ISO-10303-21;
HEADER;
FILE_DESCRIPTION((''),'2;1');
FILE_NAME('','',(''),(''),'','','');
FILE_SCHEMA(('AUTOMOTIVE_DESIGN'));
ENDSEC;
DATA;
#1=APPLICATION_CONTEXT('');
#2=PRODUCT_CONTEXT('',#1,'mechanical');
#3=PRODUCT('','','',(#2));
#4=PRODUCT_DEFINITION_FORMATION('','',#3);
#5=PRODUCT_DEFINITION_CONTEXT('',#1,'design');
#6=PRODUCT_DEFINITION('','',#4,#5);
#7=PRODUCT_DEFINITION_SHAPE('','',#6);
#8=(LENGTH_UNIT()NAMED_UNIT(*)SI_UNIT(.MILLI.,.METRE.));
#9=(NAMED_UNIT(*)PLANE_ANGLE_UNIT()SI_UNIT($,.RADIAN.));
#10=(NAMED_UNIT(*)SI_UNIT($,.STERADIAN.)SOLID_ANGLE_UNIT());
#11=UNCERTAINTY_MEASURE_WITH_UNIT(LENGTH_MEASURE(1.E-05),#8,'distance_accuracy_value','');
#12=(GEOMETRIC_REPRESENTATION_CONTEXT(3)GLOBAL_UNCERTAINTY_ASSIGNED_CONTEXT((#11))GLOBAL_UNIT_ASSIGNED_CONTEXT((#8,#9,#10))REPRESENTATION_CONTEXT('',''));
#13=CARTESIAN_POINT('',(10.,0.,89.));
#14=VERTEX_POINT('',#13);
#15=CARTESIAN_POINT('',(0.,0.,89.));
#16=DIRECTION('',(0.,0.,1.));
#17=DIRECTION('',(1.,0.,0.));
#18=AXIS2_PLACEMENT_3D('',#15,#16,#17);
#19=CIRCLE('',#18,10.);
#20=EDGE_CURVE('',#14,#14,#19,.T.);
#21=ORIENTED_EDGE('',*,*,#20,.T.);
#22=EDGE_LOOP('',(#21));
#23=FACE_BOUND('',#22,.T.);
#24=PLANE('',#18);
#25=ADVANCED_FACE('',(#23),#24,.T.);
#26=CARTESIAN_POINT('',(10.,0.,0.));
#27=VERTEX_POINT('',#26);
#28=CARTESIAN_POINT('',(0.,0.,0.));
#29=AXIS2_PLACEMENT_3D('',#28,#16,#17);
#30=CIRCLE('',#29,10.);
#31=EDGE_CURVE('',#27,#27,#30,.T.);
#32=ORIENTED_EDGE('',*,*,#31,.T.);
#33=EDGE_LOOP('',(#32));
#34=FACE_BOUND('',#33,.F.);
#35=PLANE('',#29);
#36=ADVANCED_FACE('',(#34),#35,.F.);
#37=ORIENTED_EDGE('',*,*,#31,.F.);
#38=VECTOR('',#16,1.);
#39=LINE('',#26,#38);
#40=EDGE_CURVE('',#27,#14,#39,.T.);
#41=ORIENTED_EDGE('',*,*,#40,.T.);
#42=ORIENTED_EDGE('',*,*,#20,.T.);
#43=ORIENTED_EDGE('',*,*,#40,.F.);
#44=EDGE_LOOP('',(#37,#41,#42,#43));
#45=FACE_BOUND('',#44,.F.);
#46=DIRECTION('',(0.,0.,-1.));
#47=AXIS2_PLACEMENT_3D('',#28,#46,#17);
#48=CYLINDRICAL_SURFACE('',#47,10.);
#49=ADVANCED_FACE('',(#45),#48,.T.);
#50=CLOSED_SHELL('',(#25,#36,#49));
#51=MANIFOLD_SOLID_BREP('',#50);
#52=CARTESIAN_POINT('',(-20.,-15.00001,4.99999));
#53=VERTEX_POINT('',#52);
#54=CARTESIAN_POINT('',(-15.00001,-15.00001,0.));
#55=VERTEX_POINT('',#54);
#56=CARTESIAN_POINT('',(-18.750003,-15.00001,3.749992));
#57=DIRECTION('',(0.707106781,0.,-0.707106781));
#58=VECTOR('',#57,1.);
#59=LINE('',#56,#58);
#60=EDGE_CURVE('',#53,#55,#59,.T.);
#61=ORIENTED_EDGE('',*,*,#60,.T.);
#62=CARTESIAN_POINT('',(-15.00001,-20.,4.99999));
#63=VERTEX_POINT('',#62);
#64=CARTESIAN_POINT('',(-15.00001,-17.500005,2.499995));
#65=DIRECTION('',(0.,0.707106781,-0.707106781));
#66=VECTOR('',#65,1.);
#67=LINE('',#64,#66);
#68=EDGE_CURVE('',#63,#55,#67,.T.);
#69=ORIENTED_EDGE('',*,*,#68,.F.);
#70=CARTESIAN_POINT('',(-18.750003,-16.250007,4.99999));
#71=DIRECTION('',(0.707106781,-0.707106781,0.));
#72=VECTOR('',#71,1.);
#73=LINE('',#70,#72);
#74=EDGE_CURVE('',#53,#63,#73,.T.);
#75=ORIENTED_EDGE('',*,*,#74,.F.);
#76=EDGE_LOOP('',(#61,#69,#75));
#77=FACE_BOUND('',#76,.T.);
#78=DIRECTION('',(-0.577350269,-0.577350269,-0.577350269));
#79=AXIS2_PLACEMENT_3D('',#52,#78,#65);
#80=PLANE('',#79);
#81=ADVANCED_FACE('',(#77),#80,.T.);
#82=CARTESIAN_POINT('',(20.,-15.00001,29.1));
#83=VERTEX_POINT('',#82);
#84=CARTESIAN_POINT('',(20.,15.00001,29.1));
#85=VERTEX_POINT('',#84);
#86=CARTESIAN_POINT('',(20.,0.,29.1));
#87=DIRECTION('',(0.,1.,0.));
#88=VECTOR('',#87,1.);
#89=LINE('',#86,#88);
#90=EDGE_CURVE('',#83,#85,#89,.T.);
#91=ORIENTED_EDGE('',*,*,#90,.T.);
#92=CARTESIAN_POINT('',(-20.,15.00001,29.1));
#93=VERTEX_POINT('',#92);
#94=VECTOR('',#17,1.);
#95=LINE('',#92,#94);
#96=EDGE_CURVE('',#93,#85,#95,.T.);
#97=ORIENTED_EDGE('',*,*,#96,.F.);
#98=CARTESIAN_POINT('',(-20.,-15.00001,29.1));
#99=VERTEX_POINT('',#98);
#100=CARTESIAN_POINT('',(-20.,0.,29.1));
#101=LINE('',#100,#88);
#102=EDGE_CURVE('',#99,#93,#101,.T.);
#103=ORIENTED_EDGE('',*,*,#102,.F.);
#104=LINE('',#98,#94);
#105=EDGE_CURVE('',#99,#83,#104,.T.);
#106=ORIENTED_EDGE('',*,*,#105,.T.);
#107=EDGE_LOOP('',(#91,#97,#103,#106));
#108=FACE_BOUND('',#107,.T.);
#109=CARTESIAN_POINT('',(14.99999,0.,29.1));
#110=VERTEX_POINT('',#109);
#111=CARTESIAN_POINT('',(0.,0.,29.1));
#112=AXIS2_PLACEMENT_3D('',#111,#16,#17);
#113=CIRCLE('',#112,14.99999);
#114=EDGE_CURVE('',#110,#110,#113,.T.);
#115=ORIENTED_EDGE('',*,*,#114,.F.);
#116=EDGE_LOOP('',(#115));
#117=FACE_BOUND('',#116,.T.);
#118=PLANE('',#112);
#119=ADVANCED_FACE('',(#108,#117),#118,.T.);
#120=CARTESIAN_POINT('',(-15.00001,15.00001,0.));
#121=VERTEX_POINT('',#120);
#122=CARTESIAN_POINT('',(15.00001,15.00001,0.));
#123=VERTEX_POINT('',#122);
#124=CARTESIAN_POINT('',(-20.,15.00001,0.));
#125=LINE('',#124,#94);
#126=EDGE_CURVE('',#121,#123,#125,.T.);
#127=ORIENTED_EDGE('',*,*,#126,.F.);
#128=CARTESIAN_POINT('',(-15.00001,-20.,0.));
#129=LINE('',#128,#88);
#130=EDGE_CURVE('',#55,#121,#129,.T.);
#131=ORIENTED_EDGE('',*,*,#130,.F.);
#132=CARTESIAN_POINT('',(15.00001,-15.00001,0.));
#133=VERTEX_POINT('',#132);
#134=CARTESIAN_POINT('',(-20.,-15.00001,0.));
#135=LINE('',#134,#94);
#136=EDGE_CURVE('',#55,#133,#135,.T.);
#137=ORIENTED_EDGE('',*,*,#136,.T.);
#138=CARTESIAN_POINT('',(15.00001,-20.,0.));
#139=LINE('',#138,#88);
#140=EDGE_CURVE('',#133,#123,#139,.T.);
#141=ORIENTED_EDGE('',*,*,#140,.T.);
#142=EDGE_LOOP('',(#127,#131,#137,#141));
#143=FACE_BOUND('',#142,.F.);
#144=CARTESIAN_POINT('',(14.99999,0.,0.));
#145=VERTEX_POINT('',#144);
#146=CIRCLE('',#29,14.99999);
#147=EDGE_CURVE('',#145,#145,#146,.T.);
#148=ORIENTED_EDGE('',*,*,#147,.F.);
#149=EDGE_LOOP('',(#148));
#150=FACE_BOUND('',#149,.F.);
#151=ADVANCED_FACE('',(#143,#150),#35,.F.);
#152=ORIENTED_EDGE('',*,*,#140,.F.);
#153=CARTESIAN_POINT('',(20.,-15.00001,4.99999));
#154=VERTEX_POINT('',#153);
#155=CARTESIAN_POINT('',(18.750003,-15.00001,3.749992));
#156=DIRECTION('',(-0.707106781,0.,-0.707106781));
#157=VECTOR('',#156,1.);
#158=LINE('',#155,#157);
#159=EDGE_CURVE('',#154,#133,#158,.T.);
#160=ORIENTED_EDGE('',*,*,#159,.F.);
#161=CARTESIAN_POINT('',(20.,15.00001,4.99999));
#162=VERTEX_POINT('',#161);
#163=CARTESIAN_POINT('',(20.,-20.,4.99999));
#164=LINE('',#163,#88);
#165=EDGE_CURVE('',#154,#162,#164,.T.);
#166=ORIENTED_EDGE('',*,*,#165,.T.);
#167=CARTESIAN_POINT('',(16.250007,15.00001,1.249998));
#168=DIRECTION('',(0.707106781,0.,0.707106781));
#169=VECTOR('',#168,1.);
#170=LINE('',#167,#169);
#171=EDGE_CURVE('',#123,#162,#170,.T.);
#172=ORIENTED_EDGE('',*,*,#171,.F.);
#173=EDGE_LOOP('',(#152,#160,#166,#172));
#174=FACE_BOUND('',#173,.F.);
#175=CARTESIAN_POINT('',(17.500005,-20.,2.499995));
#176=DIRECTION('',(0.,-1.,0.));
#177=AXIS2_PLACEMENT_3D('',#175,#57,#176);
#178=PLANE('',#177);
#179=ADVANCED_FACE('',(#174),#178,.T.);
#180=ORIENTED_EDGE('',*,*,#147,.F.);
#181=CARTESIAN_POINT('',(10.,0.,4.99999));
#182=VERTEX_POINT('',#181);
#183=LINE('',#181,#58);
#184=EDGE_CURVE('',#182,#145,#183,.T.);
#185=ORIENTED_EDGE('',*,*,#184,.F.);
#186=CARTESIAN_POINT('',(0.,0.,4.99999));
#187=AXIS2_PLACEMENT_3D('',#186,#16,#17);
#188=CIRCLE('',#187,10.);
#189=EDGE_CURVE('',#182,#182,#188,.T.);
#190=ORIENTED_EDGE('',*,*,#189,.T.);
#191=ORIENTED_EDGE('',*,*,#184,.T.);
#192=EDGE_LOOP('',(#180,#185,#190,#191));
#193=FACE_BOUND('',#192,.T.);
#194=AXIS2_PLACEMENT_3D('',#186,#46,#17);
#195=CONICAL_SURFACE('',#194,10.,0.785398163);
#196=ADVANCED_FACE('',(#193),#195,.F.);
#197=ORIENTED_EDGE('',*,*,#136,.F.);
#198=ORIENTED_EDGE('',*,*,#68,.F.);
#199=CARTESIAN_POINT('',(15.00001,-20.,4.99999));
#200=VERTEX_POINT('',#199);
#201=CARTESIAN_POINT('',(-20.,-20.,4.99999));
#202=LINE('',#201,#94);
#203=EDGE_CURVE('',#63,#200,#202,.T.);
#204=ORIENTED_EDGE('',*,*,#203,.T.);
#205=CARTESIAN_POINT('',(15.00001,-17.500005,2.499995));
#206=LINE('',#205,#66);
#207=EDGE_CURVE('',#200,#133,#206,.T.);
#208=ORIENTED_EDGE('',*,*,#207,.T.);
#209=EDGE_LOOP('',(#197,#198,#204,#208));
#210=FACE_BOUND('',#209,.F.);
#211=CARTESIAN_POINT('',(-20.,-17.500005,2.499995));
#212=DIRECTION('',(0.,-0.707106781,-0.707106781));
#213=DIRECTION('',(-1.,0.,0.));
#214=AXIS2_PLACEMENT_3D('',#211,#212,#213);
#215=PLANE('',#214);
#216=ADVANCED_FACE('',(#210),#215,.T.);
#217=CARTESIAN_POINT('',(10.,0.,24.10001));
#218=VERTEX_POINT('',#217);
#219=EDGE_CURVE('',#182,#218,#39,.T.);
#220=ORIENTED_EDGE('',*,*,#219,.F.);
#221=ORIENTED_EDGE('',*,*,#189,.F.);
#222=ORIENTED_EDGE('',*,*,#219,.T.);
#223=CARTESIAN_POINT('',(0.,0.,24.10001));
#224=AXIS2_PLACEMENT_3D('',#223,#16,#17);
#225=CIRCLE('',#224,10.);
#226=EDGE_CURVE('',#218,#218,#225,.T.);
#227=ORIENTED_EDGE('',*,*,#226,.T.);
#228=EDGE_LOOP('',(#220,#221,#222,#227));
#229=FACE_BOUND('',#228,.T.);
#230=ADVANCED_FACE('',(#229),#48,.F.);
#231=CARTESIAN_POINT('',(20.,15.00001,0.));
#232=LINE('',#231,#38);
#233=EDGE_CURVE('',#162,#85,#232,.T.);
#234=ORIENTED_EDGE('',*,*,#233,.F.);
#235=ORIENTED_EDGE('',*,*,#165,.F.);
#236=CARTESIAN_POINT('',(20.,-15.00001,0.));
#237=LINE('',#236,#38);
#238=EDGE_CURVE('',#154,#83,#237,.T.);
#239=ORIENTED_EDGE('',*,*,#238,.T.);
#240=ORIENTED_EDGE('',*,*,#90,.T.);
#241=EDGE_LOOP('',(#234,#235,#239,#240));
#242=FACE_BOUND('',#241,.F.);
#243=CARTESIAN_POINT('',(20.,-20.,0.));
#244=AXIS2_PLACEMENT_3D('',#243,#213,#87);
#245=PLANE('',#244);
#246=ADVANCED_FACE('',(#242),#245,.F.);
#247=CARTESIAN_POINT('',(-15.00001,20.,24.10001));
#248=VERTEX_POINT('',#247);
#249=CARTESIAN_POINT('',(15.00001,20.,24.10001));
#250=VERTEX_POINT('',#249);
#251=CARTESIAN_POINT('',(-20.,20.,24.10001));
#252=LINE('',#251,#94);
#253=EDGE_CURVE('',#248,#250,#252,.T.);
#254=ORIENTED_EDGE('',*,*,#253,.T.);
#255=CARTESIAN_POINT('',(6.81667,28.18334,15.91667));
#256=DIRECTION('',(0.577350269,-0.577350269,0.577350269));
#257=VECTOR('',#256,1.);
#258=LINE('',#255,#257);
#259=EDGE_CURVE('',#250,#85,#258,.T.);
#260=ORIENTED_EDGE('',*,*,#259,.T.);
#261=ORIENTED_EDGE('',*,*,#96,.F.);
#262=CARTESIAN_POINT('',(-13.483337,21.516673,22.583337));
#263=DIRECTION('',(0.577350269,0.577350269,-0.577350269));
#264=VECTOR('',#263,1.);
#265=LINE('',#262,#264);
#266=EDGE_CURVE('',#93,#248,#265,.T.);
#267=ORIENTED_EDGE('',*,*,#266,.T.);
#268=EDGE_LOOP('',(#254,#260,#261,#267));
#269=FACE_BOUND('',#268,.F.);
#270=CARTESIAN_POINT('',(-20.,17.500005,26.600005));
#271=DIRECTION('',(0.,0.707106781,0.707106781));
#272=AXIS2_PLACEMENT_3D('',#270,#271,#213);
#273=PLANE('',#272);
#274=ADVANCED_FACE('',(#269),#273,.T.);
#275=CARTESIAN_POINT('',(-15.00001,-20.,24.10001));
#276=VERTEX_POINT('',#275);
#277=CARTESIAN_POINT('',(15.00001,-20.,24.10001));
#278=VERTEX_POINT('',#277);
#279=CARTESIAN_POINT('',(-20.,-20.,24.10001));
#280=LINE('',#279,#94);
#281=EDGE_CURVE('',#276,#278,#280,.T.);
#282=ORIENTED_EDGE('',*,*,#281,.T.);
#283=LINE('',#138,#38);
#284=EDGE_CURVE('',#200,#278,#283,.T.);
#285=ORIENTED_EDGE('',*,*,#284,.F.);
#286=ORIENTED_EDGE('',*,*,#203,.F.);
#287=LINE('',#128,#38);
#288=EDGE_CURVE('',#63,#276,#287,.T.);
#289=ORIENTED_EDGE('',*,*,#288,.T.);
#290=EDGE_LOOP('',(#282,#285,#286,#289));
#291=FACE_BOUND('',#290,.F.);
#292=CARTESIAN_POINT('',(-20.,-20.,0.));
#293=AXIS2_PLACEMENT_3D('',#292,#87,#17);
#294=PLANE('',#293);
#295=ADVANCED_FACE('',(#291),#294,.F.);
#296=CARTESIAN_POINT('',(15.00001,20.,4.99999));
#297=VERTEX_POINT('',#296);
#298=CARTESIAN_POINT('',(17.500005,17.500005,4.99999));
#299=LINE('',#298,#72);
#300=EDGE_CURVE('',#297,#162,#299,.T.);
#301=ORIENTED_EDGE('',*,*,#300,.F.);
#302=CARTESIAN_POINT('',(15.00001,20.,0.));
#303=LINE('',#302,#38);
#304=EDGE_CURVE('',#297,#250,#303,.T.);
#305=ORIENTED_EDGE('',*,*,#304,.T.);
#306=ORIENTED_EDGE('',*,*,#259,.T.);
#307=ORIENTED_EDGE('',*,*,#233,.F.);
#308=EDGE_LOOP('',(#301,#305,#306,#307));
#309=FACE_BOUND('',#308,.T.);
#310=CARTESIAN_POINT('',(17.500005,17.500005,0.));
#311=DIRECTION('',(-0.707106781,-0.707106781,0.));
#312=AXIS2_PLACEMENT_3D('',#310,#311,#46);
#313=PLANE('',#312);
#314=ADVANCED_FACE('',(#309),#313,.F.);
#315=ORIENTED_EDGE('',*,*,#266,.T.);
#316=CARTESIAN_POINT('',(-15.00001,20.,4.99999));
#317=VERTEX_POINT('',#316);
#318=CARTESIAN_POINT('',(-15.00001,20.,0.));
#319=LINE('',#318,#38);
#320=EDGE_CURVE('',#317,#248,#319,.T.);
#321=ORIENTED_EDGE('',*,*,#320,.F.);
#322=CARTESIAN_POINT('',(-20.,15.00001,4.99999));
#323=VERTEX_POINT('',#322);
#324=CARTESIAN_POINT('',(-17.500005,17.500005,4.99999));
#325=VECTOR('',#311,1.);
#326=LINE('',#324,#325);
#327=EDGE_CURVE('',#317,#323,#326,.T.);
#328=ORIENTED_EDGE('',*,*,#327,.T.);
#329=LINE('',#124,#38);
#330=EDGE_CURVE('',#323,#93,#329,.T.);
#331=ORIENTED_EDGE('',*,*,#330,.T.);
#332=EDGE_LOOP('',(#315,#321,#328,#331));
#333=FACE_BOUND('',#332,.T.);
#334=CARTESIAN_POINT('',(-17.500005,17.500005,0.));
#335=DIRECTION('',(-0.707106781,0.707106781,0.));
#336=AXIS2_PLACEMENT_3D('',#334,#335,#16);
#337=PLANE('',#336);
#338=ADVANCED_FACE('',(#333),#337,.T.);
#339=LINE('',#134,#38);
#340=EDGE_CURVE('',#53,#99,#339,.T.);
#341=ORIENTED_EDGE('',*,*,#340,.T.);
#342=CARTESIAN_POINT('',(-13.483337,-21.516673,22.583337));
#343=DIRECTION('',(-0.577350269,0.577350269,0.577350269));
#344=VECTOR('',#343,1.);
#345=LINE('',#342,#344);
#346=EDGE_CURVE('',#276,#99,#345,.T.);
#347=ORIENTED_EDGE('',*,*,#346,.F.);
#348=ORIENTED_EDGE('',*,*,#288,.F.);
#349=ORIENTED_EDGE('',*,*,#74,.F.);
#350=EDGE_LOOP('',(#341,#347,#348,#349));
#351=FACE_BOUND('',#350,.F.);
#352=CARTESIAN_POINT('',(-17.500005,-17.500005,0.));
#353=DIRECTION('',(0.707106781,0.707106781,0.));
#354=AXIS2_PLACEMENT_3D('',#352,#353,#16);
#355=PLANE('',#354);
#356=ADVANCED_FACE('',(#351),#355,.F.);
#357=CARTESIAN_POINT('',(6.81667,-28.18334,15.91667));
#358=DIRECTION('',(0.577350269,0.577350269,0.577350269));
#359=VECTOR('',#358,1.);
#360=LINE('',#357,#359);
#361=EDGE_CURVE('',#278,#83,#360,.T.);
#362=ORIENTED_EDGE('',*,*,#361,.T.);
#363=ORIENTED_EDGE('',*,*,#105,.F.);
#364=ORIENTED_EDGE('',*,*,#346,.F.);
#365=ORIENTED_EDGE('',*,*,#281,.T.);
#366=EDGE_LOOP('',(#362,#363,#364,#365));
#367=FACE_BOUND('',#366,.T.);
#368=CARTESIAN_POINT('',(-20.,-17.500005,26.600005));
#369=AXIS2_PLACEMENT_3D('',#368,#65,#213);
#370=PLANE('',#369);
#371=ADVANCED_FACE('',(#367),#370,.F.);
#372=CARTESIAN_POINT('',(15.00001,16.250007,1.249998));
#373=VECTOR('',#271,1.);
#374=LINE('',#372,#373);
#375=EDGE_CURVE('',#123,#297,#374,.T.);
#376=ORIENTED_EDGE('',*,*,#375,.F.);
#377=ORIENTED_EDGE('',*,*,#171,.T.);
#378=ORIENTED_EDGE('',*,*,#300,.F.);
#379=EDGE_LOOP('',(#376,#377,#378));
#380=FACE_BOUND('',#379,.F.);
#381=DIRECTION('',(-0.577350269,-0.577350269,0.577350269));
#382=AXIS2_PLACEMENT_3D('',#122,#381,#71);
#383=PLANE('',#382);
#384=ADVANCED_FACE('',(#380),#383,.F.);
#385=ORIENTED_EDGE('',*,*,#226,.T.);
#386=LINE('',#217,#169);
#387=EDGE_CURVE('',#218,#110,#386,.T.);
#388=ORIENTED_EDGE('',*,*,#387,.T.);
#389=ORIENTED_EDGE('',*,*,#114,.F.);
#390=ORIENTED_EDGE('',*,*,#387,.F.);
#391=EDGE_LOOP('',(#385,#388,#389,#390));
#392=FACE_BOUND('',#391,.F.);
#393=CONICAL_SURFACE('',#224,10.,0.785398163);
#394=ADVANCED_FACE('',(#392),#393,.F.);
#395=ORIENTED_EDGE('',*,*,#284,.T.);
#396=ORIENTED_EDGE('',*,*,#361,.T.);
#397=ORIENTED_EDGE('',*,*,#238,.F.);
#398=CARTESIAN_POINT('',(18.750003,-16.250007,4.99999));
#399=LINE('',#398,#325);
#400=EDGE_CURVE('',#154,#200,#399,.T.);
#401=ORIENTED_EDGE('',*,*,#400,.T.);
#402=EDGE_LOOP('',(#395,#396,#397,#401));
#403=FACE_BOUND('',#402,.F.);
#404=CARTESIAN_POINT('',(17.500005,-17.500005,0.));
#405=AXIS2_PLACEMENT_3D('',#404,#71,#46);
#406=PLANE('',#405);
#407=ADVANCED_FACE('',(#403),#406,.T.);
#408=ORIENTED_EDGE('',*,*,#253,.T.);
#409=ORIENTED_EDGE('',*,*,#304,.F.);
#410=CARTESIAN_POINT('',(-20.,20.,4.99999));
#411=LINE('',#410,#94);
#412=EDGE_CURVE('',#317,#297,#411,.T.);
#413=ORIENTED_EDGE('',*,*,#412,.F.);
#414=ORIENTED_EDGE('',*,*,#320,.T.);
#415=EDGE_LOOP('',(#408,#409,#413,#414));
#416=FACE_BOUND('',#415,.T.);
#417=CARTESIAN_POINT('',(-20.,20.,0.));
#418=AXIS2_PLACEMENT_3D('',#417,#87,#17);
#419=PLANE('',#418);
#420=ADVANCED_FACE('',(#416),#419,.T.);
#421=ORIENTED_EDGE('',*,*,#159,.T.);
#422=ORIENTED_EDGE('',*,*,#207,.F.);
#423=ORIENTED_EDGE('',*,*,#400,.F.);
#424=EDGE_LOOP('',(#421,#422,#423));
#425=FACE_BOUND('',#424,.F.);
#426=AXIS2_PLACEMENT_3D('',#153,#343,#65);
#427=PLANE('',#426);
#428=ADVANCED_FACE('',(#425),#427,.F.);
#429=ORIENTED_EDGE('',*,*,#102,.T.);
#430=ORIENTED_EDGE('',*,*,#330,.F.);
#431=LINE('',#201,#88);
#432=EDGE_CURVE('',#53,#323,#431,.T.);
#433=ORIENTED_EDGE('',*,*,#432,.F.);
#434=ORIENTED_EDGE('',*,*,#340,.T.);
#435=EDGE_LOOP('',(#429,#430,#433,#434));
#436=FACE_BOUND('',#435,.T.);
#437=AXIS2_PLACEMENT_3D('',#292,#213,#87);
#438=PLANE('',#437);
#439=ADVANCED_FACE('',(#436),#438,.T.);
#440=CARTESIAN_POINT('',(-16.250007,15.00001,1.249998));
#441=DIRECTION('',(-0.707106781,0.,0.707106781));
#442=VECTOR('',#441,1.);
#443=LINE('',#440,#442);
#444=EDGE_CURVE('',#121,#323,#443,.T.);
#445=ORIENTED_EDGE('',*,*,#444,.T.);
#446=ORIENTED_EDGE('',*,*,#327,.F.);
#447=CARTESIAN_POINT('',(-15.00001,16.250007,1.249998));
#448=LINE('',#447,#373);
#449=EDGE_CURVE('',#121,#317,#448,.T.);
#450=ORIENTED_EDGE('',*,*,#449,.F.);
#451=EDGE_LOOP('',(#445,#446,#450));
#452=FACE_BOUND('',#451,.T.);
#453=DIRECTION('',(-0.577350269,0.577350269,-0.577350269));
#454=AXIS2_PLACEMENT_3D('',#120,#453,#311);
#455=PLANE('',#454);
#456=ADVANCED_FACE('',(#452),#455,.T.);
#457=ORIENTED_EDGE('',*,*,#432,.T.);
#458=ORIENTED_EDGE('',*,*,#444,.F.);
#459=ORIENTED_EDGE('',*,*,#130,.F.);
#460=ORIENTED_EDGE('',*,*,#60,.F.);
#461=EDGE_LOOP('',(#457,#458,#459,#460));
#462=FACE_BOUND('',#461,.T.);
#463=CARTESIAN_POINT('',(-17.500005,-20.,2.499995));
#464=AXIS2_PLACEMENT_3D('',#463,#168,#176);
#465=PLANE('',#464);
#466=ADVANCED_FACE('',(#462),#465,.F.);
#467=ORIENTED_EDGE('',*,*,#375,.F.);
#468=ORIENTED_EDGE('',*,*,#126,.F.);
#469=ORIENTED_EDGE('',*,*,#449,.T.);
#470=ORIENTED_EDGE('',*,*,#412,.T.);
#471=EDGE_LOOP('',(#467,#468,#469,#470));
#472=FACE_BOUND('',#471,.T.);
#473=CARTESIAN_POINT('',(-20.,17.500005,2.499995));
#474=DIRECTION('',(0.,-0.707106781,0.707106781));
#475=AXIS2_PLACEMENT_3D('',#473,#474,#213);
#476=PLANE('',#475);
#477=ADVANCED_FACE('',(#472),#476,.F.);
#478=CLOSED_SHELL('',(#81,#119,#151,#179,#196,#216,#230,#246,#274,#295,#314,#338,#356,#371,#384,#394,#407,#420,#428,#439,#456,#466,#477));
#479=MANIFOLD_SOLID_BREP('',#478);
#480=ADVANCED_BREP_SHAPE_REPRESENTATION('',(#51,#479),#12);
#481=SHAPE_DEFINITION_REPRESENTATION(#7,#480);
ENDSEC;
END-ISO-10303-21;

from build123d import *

# Parameters (mm, degrees)
F0_W     = 40
F0_H     = 40
F0_R     = 10
F1_DEPTH = 29.1
F2_DEPTH = 89
F3_SIZE  = 4.99999


# Not quite as in the source:
# - a fillet or chamfer is up to 0.001 mm smaller than in the source, because OpenCascade refuses the exact size


with BuildPart() as f1:
    # F0 (on Top) → F1 (new body)
    with BuildSketch(Plane.XY):
        Rectangle(F0_W, F0_H)
        Circle(F0_R, mode=Mode.SUBTRACT)
    extrude(amount=F1_DEPTH)

    # F3 (size 5 in the source; OpenCascade refuses exactly that, so slightly less here)
    f3_edges = [f1.edges().sort_by_distance(p)[0] for p in [
        (0, -20, 29.1),
        (0, -20, 0),
        (-20, -20, 14.55),
        (20, -20, 14.55),
        (20, 20, 14.55),
        (-20, 20, 14.55),
        (0, 20, 0),
        (0, 20, 29.1),
        (-10, 0, 29.1),
        (20, 0, 0),
        (-20, 0, 0),
        (-10, 0, 0),
    ]]
    chamfer(f3_edges, length=F3_SIZE)


with BuildPart() as f2:
    # F0 (on Top) → F2 (new body)
    with BuildSketch(Plane.XY):
        Circle(F0_R)
    extrude(amount=F2_DEPTH)


solid = Compound([f1.part, f2.part])
